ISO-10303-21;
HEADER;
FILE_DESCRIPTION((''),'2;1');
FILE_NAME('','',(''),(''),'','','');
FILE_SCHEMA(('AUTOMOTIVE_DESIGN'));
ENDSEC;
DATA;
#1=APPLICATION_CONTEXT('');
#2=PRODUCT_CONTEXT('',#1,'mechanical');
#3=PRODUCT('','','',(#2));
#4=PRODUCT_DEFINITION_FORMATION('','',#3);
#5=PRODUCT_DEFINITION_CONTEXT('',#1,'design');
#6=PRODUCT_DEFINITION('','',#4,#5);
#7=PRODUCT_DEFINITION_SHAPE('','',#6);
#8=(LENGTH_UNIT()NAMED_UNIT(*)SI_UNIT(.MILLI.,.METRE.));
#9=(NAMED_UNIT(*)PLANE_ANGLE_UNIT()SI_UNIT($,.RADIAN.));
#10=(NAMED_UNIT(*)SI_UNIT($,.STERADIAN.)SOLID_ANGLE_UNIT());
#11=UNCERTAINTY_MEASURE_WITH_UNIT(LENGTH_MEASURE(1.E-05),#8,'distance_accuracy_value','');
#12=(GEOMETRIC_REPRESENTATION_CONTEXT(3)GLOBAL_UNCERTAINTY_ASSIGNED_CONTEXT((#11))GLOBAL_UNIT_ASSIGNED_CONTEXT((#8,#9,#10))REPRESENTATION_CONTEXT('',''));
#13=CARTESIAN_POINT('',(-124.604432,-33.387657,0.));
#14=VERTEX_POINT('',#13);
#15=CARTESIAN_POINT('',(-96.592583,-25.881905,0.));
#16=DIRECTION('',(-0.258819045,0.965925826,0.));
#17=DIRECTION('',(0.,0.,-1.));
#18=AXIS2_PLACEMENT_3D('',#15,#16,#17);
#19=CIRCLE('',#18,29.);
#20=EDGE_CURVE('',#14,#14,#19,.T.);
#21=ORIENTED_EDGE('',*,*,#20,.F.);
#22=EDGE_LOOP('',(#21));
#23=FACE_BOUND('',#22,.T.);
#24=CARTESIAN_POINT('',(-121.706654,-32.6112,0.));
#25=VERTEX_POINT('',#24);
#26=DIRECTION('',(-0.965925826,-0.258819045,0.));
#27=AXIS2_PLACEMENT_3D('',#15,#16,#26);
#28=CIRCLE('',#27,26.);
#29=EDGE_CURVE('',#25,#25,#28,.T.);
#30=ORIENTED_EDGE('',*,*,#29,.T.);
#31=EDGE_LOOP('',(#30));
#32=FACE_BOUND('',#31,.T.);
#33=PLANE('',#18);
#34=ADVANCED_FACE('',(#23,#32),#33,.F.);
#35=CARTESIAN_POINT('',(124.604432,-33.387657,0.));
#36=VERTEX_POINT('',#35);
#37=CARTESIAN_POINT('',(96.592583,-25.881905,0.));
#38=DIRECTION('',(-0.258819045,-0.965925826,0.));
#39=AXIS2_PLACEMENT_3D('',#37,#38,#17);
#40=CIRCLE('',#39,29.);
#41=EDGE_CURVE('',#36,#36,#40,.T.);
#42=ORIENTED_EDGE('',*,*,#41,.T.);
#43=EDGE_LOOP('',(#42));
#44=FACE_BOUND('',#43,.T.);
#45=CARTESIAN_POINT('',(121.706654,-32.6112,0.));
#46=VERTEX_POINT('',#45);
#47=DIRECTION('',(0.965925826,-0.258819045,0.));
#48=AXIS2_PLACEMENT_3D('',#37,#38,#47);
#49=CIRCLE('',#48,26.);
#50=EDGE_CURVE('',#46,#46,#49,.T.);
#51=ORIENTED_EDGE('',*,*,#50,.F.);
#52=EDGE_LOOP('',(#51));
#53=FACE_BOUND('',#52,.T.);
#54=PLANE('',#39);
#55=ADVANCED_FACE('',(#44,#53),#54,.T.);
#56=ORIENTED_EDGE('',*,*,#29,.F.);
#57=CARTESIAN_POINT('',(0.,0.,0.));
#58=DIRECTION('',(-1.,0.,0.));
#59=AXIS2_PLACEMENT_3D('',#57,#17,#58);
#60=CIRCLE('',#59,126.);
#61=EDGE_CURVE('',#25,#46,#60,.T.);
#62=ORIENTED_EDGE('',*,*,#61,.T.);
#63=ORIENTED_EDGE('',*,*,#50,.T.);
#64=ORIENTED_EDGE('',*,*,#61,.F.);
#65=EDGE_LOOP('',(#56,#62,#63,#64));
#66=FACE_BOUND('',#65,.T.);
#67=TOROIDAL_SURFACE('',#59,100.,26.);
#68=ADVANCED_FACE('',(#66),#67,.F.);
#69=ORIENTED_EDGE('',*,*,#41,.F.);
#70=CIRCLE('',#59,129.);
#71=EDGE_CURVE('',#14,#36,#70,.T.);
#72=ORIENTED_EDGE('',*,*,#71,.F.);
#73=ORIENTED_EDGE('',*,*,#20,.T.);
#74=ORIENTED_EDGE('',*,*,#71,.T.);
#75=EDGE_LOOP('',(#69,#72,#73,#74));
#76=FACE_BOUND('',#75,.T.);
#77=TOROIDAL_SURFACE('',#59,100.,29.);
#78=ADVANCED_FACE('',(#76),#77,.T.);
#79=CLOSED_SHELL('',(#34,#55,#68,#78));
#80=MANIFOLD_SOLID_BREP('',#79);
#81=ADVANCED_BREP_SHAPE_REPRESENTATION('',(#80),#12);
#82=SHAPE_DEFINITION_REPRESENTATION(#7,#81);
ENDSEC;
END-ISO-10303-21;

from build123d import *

# Parameters (mm, degrees)
SWEEP_3_OUTLINE_R = 29
SWEEP_3_ANGLE     = 210
SHELL_1_T         = -3


# Read off the part's stored shape, not the designer's step: 扫描3
with BuildPart() as part:
    # 扫描3 outline → 扫描3 (revolve)
    with BuildSketch(Plane(origin=(0, 0, 0), x_dir=(0.9659258262890679, -0.2588190451025222, 0), z_dir=(-0.2588190451025222, -0.9659258262890679, 0))):
        with Locations((100, 0)):
            Circle(SWEEP_3_OUTLINE_R)
    revolve(axis=Axis((0, 0, 0), (0, 0, 1)), revolution_arc=SWEEP_3_ANGLE)

    # 抽壳1
    shell_1_openings = [part.faces().sort_by_distance(p)[0] for p in [
        (96.592582629, -25.88190451, 0),
        (-96.592582629, -25.88190451, 0),
    ]]
    offset(amount=SHELL_1_T, openings=shell_1_openings, kind=Kind.INTERSECTION)


solid = part.part
